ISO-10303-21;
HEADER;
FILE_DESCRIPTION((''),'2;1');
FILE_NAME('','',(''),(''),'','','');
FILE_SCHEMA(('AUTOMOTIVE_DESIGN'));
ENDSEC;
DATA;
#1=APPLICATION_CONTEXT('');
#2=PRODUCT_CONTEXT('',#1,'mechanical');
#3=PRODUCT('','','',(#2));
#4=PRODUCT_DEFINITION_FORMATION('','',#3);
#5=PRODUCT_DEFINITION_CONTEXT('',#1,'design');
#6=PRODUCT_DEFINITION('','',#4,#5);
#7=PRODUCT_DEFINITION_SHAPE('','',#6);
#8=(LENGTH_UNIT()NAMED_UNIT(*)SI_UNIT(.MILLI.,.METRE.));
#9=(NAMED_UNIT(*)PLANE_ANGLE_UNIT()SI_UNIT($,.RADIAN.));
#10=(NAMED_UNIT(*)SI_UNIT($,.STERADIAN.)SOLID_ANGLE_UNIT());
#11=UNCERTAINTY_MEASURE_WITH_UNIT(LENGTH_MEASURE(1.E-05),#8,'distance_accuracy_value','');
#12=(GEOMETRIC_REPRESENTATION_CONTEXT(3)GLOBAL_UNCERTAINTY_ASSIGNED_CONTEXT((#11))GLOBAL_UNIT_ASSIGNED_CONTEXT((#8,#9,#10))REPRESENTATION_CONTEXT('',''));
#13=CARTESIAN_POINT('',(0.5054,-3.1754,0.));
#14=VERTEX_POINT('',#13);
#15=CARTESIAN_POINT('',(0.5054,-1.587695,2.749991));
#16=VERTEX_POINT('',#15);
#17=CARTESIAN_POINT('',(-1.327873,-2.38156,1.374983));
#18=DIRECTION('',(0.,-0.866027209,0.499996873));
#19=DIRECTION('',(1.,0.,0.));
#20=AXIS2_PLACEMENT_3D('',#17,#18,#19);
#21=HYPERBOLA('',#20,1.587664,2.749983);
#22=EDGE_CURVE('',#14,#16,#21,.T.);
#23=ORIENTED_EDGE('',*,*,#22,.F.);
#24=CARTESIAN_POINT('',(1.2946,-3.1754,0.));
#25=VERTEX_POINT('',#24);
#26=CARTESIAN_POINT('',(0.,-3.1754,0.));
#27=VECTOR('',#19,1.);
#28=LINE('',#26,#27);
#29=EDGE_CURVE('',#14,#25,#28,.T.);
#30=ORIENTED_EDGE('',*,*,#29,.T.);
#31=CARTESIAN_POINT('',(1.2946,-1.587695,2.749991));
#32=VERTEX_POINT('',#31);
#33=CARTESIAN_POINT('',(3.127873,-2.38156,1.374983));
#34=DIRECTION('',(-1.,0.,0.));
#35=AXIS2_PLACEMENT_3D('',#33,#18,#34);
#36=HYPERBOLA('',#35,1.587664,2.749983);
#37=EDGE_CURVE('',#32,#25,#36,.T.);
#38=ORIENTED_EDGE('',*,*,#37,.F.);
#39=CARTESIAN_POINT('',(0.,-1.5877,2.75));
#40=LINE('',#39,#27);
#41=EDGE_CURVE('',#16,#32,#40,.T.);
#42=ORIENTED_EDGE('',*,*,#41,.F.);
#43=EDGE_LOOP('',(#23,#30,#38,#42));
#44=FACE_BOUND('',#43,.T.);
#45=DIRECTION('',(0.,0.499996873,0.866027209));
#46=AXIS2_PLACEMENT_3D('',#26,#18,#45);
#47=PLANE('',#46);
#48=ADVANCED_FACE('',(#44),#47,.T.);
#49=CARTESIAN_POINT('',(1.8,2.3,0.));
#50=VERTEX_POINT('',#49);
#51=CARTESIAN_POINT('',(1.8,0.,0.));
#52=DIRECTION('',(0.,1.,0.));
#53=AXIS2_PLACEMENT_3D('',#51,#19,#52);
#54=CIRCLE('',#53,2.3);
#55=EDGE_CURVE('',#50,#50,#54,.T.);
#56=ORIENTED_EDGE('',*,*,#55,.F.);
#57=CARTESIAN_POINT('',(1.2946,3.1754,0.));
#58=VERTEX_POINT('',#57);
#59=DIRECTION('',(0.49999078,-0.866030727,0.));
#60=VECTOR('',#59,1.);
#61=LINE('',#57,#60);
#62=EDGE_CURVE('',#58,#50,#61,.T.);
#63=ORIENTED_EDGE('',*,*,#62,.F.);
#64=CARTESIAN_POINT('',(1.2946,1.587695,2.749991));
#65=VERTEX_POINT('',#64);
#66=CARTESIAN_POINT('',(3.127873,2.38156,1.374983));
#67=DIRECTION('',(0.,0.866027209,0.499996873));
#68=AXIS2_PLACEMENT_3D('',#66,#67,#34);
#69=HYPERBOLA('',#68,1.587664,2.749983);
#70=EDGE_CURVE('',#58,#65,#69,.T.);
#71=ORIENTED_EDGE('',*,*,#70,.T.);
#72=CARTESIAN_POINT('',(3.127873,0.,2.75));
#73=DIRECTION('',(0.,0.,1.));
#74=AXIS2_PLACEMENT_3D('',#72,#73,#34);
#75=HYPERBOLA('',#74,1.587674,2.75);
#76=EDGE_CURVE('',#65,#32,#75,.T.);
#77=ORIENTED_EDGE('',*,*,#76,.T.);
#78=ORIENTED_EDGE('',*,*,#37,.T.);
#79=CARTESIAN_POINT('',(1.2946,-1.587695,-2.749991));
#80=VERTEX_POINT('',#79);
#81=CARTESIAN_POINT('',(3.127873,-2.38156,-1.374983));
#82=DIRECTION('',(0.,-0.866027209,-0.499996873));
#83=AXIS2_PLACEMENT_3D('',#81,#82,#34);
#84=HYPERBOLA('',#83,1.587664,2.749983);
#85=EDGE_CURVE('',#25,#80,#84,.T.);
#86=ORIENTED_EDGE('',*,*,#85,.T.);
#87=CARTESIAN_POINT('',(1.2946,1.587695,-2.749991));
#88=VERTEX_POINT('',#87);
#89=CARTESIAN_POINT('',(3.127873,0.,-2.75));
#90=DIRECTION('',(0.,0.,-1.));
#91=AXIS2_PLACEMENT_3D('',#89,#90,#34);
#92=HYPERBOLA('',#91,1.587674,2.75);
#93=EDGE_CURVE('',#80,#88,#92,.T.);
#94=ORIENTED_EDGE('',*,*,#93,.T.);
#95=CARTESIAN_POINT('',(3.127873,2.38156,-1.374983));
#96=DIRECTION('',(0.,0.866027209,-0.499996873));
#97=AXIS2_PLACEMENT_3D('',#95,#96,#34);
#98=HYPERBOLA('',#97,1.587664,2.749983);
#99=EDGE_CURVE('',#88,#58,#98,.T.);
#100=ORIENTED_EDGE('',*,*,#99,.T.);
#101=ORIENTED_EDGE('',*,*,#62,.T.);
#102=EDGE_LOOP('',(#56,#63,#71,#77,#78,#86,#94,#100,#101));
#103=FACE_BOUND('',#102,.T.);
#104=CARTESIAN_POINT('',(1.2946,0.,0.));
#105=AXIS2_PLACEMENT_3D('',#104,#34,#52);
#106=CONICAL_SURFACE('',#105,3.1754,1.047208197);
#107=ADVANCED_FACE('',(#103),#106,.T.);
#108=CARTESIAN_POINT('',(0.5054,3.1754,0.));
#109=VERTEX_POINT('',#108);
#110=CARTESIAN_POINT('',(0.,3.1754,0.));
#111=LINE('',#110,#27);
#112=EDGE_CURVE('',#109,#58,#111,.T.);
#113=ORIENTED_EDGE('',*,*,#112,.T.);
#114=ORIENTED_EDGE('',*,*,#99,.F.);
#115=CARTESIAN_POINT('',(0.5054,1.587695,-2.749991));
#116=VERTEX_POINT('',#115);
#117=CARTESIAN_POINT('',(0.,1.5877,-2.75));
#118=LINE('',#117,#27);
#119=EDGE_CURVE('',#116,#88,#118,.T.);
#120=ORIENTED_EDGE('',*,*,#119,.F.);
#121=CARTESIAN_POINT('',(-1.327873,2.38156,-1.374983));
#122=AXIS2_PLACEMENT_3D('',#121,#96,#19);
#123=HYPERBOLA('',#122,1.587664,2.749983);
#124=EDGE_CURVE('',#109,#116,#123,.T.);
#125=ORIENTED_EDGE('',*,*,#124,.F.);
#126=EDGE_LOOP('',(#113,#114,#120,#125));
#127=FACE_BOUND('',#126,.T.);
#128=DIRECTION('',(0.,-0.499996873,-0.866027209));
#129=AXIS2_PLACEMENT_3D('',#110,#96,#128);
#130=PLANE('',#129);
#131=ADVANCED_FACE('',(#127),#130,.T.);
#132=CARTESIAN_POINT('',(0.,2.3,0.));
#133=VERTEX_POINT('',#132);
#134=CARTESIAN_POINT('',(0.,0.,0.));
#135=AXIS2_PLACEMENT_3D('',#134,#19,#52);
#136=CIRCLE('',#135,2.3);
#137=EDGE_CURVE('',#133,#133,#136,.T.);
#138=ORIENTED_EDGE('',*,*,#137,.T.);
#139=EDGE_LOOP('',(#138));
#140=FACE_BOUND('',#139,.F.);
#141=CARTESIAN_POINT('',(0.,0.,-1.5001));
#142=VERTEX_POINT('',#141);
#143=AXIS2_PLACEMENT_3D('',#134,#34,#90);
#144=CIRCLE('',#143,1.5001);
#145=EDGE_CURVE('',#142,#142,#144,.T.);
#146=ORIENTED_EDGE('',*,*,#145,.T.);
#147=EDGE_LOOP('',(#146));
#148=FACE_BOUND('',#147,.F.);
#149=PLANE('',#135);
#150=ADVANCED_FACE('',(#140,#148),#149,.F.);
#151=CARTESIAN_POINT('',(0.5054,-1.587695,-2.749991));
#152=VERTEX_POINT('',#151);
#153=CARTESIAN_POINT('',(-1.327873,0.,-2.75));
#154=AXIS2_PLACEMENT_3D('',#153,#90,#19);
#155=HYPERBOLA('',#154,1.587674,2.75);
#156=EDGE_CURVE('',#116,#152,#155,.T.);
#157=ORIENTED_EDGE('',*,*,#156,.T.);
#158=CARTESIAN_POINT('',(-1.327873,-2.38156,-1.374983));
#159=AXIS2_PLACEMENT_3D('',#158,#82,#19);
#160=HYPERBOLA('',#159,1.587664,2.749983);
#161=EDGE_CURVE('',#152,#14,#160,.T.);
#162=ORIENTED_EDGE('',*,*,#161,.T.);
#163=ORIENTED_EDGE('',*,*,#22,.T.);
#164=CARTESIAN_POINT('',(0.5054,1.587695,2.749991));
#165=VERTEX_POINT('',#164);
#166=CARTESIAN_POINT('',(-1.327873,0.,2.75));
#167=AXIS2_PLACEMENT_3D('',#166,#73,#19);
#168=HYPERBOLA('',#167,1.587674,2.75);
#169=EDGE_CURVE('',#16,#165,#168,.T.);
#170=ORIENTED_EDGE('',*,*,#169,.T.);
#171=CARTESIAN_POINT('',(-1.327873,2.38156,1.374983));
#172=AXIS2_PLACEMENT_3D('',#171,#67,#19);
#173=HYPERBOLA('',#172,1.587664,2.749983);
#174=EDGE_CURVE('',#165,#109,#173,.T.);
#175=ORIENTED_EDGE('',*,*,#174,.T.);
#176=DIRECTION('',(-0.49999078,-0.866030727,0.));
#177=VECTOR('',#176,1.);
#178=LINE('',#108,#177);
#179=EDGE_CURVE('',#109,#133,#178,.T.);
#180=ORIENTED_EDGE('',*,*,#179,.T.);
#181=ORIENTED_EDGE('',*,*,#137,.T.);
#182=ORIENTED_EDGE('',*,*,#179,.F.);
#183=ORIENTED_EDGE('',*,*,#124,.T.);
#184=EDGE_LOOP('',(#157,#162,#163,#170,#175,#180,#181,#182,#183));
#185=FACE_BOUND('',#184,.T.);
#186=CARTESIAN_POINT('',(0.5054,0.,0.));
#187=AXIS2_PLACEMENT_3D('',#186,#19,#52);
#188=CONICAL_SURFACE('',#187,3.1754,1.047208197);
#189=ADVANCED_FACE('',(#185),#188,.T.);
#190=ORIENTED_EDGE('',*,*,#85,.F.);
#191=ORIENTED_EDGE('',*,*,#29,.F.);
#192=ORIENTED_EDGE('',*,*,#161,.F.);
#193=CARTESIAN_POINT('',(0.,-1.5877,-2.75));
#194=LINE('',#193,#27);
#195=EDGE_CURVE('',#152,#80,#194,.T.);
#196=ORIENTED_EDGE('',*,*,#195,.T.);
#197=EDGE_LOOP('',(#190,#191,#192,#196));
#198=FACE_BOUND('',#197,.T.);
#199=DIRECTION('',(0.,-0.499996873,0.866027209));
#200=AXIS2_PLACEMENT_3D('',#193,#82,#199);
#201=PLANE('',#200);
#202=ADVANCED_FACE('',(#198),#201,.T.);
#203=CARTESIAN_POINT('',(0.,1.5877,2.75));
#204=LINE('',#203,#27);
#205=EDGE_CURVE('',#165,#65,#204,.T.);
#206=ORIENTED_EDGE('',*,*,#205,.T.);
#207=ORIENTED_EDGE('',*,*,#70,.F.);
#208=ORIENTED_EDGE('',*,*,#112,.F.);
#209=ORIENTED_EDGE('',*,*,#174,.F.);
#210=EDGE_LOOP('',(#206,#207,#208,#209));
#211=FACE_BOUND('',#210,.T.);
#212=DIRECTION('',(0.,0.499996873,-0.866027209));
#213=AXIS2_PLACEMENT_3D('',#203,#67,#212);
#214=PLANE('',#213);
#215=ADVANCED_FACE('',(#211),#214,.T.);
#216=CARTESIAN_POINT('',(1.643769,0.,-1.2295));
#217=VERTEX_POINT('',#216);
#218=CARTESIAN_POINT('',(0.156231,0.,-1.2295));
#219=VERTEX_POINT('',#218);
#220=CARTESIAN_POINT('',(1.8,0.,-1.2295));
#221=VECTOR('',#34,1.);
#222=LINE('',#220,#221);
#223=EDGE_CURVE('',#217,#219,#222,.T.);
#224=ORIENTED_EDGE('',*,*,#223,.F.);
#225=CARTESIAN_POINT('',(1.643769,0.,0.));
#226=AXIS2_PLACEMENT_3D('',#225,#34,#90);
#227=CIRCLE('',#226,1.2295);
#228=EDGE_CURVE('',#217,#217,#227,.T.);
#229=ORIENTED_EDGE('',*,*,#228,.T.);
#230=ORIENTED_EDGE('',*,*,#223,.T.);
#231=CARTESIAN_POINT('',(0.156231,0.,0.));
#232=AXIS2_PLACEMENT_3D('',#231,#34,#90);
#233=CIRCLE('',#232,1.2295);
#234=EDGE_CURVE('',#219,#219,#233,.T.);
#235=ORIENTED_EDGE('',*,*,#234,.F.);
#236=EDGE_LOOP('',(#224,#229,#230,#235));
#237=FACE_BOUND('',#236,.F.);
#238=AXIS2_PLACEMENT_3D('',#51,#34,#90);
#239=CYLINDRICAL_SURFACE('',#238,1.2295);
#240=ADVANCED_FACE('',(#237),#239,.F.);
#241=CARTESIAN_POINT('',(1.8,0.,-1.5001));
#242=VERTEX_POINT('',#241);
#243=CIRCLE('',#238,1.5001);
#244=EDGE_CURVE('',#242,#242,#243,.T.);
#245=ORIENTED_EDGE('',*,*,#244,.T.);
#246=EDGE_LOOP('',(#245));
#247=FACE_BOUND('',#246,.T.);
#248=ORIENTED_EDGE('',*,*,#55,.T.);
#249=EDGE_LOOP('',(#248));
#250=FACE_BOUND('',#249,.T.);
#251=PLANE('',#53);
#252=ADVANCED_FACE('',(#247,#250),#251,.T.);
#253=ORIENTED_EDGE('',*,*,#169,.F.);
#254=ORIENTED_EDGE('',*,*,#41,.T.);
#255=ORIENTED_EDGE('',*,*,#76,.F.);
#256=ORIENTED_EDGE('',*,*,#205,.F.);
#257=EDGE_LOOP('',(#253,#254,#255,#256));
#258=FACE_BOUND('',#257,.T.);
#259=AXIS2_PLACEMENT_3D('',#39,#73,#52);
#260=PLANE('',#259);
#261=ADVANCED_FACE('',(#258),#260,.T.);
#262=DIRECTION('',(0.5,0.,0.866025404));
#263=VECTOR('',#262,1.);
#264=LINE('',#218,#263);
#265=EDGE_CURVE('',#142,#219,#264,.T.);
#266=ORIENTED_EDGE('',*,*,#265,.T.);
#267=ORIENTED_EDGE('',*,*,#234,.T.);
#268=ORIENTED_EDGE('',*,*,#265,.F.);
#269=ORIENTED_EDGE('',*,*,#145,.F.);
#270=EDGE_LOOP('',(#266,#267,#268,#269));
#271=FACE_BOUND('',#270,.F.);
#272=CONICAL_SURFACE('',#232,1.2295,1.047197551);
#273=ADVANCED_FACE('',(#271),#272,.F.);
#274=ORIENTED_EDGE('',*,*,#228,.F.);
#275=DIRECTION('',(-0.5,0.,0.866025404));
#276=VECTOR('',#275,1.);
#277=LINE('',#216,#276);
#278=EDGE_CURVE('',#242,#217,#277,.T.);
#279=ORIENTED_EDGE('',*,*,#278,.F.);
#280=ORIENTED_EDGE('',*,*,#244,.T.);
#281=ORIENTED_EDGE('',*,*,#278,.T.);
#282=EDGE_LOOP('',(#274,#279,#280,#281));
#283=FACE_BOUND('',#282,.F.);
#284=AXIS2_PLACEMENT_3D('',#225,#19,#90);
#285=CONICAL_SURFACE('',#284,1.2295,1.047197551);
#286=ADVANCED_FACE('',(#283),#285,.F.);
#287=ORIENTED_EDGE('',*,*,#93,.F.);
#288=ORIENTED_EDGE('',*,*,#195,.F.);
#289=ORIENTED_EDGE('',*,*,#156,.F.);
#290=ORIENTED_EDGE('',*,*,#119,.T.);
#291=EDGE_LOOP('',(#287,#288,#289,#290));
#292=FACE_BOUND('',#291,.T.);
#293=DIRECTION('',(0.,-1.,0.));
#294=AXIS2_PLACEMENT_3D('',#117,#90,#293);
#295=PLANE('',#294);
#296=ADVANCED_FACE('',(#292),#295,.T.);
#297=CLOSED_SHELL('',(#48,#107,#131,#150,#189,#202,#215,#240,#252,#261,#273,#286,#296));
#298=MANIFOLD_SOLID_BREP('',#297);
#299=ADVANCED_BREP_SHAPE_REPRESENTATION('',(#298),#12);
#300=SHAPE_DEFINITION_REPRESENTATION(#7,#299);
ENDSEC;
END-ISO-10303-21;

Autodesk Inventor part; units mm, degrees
ref_plane "YZ Plane" through (0, 0, 0) normal (1, 0, 0) x (0, 1, 0)
ref_plane "XZ Plane" through (0, 0, 0) normal (0, 1, 0) x (-1, 0, 0)
sketch "Sketch1" plane through (0, 0, 0) normal (1, 0, 0) x (0, 1, 0)
  line L0 (-3.1754, 0) -> (-1.5877, 2.75)
  line L1 (-1.5877, 2.75) -> (1.5877, 2.75)
  line L2 (1.5877, 2.75) -> (3.1754, 0)
  line L3 (3.1754, 0) -> (1.5877, -2.75)
  line L4 (1.5877, -2.75) -> (-1.5877, -2.75)
  line L5 (-1.5877, -2.75) -> (-3.1754, 0)
  point P0 (0, 0)
  point P1 (0, 0)
  dimension "d0" = 6.3509
extrude "Body" add sketch "Sketch1" along normal blind 1.8
sketch "Sketch2" plane through (0, 0, 0) normal (0, 0, 1) x (1, 0, 0)
  line L0 (0, 1.5877) -> (0, 3.1754) projected
  line L1 (0, 3.1754) -> (1.8, 3.1754) projected
  line L2 (1.8, 1.5877) -> (1.8, 3.1754) projected
  line L3 (-0.36, 0) -> (2.16, 0) projected
  line L4 (0.5054, 3.1754) -> (0, 2.3)
  line L5 (1.2946, 3.1754) -> (1.8, 2.3)
  dimension "d3" = 30
  dimension "d4" = 30
  dimension "d5" = 4.6
  dimension "d6" = 4.6
revolve "Chamfer1" cut sketch "Sketch2" angle 360 about axis through (-10, 0, 0) along (1, 0, 0)
sketch "Sketch3" plane through (1.8, 0, 0) normal (1, 0, 0) x (0, 0, -1)
  arc A0 (-0.625, -1.0825) -> (0.625, -1.0825) centre (0, 0) ccw projected
hole "Thread" at (1.8, 0, 0) direction (-1, 0, 0) diameter 2.459 end through all thread size "M3x0.5" class "6H" standard "ISO Metric profile"
chamfer "Chamfer2" distance 0.2706 angle 30 1 edges at (1.8, 0, 1.2295) measured on face at (1.8, 1.9179, -0.2329)
chamfer "Chamfer3" distance 0.2706 angle 30 1 edges at (0, 0, 1.2295) measured on face at (0, 1.9179, -0.2329)
ref_plane "Work Plane1" through (-6.7921, 0, 0) normal (0, -0.8660254, -0.5) x (1, 0, 0)
equation "\"d0\" = 1.1547 * SW"
equation "\"d1\" = KOH"
equation "\"d3\" = ANG1"
equation "\"d4\" = ANG2"
equation "\"d5\" = SW0"
equation "\"d6\" = SW01"
equation "\"d8\" = -0.5 * GD1 + 0.5 * NND"
equation "\"d40\" = -0.5 * GD1 + 0.5 * NND"
equation "\"d10\" = -0.5 * GD1 + 0.5 * NND"
equation "\"d41\" = -0.5 * GD1 + 0.5 * NND"
equation "\"ANG1\" = 30deg"
equation "\"ANG2\" = 30deg"
equation "\"NND\" = 3"
equation "\"KOH\" = 1.8"
equation "\"SW\" = 5.5"
equation "\"SW0\" = 4.6"
equation "\"SW01\" = SW0"
equation "\"GUL\" = 0.541266 * PTC"
equation "\"THREADDIA\" = 3"
equation "\"TOA\" = 30deg"
equation "\"PTC\" = 0.5"
equation "\"E0\" = 1.155 * SW"
equation "\"GAL\" = 0.541266 * PTC"
equation "\"GD1\" = 2.458734"
properties part number "ISO 4035 - M3(4)" material "Stainless Steel, 440C"
